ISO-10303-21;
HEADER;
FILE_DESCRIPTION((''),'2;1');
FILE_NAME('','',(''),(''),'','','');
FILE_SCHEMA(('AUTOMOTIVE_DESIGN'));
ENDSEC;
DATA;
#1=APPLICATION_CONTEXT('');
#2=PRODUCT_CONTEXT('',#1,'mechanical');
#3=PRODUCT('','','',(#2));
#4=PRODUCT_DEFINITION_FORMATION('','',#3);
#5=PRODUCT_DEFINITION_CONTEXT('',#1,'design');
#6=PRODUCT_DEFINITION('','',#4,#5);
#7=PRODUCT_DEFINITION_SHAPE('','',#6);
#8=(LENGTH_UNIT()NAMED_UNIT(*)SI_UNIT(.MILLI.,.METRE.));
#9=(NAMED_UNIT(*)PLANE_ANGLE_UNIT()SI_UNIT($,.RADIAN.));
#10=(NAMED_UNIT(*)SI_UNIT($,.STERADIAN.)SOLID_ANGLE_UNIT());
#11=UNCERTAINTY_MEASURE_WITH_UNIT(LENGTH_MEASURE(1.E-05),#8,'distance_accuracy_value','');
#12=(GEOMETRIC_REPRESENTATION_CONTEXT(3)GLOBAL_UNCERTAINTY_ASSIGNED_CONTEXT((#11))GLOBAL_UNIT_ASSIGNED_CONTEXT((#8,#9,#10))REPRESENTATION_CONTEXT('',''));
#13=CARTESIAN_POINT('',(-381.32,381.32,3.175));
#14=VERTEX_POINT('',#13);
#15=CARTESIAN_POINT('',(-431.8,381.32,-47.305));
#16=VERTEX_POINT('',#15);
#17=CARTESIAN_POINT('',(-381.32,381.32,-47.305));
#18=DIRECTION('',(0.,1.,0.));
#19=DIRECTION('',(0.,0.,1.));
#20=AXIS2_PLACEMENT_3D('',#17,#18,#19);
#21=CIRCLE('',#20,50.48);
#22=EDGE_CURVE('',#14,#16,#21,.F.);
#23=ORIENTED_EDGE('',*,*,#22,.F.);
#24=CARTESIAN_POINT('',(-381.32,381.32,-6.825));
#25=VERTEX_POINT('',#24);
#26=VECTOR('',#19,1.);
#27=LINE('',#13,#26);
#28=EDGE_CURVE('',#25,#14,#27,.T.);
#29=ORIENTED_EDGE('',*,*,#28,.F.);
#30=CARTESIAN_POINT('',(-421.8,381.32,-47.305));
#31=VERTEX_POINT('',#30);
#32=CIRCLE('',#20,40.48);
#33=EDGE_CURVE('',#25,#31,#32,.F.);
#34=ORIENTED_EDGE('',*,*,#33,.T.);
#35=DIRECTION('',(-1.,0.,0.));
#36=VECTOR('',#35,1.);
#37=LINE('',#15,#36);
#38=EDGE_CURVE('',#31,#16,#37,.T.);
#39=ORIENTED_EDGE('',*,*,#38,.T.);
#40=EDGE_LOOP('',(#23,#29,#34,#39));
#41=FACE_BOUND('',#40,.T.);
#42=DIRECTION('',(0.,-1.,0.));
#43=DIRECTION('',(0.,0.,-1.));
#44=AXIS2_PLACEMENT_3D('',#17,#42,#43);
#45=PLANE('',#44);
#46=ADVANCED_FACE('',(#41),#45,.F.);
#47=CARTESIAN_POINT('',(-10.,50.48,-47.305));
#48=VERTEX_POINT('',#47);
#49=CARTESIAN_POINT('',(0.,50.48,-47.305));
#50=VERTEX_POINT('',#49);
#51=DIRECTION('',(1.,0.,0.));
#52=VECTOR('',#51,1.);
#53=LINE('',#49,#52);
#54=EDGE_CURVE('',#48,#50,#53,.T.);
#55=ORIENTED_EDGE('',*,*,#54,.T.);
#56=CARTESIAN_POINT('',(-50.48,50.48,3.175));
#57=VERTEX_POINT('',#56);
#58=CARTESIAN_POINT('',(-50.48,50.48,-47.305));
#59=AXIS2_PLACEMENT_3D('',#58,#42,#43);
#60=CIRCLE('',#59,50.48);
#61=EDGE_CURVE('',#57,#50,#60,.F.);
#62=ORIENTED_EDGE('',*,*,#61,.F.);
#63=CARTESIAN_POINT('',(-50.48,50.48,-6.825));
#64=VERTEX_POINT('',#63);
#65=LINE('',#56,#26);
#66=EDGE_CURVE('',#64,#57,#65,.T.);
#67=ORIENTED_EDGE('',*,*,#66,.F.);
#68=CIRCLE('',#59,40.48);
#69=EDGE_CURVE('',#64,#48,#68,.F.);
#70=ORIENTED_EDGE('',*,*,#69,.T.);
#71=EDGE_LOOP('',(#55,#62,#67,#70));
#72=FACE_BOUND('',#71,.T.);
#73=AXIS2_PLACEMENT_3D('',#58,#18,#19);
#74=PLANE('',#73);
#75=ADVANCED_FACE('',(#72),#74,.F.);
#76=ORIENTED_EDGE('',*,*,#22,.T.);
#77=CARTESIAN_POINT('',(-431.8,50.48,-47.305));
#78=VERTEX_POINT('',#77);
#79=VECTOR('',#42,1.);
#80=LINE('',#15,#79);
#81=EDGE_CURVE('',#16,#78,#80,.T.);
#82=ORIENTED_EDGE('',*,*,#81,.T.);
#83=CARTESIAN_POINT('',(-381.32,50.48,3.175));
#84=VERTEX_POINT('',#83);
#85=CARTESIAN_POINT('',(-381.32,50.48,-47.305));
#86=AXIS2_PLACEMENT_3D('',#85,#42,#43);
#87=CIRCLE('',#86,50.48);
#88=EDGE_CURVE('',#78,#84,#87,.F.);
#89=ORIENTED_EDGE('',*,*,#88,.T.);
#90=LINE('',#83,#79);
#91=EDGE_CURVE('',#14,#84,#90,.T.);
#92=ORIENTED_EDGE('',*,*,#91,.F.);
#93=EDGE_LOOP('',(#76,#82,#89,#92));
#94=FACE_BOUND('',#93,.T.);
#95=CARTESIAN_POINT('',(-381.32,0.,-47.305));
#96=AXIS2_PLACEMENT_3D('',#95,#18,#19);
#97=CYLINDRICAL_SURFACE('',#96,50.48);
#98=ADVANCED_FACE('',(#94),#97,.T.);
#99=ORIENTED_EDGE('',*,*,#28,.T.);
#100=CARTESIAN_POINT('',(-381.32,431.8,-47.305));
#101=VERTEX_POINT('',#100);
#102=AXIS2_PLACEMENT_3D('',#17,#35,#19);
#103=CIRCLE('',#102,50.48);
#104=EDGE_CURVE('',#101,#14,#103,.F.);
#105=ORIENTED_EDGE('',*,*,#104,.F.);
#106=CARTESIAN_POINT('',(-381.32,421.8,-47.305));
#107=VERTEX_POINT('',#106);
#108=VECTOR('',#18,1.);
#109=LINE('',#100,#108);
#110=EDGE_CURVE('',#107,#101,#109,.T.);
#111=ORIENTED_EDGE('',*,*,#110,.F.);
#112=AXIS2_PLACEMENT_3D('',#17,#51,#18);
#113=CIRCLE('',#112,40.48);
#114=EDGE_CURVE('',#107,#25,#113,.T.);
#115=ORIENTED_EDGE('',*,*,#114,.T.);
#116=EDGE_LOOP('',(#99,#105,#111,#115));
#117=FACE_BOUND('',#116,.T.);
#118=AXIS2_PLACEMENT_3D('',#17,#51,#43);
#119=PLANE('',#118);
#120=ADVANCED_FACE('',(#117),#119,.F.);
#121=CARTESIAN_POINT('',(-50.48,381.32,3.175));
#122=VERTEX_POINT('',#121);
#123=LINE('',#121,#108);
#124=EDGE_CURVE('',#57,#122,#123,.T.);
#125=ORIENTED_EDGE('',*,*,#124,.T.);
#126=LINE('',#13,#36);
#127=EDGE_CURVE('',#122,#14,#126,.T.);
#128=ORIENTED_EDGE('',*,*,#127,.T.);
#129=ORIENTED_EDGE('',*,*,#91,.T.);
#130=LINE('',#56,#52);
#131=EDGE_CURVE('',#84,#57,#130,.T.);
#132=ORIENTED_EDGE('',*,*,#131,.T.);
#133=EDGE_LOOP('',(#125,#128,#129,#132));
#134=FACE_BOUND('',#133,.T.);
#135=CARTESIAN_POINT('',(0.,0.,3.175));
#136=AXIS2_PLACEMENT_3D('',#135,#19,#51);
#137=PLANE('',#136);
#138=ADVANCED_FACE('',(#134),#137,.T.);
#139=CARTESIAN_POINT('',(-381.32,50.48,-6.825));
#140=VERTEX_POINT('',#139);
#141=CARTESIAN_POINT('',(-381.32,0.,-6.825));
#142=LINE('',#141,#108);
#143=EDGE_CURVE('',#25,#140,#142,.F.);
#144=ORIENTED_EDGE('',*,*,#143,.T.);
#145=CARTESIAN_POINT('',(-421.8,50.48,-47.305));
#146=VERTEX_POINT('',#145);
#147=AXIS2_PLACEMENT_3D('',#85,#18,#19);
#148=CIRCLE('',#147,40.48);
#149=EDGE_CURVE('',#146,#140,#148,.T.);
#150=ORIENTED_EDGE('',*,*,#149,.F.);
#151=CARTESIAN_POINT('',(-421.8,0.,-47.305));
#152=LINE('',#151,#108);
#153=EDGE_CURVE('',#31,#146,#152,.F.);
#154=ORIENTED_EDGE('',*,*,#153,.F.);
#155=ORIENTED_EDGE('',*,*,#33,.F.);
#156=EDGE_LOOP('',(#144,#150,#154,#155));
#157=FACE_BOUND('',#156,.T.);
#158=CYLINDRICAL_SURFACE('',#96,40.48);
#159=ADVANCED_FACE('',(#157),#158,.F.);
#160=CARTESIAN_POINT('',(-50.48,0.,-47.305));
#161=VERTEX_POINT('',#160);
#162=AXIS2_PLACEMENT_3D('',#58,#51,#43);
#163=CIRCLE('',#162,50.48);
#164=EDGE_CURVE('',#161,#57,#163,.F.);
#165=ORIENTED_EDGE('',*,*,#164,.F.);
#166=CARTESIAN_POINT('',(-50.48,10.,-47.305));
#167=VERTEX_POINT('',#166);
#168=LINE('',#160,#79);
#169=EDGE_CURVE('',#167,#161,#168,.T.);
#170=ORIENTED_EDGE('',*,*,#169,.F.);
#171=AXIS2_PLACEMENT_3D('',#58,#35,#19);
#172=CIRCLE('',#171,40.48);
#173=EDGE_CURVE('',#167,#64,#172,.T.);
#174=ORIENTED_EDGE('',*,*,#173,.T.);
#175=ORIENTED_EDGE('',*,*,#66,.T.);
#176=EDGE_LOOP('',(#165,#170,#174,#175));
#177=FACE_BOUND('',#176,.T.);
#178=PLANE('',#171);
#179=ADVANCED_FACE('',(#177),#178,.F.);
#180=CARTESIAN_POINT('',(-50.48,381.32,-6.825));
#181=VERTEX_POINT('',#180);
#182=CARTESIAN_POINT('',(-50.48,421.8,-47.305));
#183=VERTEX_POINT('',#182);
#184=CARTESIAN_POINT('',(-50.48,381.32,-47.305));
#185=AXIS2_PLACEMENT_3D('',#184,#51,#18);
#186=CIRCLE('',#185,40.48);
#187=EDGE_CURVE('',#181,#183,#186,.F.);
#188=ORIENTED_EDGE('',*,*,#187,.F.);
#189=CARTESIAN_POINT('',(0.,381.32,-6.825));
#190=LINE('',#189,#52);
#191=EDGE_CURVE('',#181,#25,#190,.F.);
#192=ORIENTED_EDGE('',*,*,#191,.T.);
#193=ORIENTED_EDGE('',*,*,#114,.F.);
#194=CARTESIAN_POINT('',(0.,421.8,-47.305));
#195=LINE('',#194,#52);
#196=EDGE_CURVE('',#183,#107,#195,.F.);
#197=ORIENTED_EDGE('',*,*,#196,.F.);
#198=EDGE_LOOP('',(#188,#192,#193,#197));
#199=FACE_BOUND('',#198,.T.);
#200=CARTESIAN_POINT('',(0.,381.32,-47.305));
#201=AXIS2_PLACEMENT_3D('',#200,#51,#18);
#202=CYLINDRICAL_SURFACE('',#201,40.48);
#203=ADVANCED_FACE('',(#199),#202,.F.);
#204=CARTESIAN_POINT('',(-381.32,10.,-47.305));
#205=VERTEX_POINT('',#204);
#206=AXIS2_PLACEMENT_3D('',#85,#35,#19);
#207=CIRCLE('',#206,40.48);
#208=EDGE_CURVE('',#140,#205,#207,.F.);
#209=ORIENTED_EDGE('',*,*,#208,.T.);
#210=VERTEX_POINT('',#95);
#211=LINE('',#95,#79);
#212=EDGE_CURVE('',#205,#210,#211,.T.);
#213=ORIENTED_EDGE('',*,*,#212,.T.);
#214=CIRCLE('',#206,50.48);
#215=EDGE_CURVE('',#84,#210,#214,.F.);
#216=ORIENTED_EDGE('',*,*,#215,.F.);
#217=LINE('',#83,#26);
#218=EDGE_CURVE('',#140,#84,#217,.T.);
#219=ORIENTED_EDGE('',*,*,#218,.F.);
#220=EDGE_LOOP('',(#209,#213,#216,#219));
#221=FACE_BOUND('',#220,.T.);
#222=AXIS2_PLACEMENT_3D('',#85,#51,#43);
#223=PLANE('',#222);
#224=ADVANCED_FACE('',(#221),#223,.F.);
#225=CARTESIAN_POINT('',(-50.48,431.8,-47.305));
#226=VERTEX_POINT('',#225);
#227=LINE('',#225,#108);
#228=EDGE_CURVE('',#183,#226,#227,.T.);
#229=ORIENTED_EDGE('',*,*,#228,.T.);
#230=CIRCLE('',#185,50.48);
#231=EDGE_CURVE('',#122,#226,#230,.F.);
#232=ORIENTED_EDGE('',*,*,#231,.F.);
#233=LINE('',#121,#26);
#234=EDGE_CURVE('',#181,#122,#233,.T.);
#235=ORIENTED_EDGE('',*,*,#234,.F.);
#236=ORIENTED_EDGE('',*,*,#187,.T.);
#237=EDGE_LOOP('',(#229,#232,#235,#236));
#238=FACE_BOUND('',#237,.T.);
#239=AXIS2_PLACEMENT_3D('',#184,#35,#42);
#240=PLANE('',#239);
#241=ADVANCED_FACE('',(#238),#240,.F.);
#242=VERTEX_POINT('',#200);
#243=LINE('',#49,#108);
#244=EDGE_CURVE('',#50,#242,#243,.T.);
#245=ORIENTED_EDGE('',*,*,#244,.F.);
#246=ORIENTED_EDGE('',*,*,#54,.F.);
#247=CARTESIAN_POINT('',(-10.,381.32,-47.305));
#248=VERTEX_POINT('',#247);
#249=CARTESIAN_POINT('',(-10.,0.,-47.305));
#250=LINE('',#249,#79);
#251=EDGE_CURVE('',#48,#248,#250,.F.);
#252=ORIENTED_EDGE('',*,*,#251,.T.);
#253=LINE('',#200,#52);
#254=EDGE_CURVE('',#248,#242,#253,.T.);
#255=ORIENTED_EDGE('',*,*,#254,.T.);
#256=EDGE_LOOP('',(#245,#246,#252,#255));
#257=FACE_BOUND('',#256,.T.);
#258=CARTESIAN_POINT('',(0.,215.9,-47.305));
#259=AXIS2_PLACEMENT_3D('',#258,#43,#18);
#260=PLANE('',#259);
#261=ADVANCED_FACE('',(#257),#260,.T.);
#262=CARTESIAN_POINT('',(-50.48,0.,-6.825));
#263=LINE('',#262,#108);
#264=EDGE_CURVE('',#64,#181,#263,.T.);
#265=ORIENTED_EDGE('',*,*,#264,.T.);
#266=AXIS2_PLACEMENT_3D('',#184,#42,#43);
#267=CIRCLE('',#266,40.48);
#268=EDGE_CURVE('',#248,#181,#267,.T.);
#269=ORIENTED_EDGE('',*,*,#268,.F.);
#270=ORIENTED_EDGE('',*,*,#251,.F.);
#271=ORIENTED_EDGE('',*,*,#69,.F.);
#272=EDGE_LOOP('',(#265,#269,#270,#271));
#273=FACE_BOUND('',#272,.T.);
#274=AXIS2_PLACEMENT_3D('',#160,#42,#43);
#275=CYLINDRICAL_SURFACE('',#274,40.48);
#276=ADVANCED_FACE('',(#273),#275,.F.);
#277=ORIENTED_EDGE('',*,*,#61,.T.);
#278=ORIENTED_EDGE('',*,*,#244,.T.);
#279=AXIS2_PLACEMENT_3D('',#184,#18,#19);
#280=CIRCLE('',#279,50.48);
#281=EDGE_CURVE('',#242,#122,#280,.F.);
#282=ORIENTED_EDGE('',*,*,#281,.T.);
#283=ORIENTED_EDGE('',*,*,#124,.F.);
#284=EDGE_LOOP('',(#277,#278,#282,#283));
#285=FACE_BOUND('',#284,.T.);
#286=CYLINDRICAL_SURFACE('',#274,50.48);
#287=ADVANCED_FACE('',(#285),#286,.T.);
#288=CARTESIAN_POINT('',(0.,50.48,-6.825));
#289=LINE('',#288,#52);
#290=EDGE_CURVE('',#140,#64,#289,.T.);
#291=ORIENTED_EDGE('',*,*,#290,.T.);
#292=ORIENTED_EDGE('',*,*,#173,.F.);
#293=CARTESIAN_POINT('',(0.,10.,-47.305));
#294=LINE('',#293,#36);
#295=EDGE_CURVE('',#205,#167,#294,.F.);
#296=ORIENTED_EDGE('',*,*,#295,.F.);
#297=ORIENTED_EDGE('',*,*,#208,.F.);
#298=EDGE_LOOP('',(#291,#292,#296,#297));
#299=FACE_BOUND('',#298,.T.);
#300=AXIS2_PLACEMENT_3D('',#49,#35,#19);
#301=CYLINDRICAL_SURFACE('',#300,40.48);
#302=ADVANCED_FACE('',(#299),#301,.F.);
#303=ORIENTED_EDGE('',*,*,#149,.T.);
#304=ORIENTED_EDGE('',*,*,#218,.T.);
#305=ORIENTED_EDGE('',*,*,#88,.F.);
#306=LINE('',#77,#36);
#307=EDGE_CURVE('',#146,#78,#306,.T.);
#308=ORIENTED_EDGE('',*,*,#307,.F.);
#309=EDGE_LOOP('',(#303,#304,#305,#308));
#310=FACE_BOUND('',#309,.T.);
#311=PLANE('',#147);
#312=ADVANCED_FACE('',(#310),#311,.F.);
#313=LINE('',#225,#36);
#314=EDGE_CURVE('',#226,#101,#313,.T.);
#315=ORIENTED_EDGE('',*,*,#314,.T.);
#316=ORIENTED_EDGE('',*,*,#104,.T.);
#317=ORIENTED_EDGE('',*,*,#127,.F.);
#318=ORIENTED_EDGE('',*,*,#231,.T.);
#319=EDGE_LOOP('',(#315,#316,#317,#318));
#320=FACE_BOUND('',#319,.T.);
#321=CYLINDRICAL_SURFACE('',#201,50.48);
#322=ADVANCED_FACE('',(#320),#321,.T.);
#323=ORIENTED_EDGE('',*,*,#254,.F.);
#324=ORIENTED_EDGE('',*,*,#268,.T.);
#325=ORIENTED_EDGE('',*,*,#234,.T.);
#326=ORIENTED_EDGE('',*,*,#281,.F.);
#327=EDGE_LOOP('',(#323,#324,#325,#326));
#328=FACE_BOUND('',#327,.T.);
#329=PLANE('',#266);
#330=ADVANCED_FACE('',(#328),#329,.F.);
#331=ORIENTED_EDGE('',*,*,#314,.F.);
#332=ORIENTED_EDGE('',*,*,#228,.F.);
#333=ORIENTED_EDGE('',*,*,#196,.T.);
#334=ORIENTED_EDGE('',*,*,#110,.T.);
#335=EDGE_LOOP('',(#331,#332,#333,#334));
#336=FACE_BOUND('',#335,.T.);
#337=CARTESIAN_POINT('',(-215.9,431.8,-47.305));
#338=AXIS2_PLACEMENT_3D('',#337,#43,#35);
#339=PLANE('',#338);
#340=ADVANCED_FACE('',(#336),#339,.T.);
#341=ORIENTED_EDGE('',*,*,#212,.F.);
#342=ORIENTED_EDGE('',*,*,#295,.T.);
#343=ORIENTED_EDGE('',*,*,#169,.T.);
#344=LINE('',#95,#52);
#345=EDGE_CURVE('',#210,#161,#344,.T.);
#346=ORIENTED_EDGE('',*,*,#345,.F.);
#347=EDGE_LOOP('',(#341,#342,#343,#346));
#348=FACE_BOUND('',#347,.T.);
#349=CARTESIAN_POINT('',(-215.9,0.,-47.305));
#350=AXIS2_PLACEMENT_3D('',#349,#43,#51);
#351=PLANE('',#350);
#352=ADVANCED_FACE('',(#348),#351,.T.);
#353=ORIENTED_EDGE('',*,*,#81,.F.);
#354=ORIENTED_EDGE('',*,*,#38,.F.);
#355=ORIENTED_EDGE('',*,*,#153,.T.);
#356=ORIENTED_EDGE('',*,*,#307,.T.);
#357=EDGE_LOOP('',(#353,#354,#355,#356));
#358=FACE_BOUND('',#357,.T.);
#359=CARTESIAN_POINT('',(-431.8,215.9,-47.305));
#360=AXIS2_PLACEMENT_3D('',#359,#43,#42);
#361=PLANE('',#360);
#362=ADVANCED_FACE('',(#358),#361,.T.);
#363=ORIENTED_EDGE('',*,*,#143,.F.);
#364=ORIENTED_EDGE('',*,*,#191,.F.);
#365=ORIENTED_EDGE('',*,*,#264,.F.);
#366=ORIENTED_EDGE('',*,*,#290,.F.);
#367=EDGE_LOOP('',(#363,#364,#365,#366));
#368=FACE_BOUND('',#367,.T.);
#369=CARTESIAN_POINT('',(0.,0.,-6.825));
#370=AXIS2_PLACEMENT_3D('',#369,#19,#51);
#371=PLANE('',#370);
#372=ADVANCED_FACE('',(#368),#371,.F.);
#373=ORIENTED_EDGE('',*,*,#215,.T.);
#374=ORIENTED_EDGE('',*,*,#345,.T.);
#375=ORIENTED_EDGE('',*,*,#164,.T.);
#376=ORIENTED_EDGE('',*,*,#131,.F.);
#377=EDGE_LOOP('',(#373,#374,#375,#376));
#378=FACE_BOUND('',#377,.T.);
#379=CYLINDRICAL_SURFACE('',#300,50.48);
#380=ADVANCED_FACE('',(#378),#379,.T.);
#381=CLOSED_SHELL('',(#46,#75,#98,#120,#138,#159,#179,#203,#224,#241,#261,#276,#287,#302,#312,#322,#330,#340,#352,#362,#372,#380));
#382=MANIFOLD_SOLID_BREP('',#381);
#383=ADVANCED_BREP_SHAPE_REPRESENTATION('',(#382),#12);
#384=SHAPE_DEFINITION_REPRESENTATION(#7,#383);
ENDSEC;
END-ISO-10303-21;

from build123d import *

# Parameters (mm, degrees)
SKETCH1_W                  = 431.8
SKETCH1_H                  = 431.8
BOSS_EXTRUDE1_DEPTH        = 3.175
CONVERT_SOLID2_START       = -431.8
CONVERT_SOLID2_DEPTH       = 431.8
CONVERT_SOLID2_2_DEPTH     = 50.480000066
CONVERT_SOLID2_START_2     = -50.480000066
CONVERT_SOLID2_3_DEPTH     = 50.480000066
CONVERT_SOLID2_START_3     = -381.319999934
CONVERT_SOLID2_4_DEPTH     = 330.839999868
CONVERT_SOLID2_START_4     = -387.436868
CONVERT_SOLID2_5_OUTLINE_W = 330.839999868
CONVERT_SOLID2_5_OUTLINE_H = 6.825
CONVERT_SOLID2_5_DEPTH     = 345.44
CONVERT_SOLID2_START_5     = 50.480000066
CONVERT_SOLID2_6_DEPTH     = 330.839999868


with BuildPart() as part:
    # Sketch1 → Boss-Extrude1 (new body)
    with BuildSketch(Plane.XY):
        with Locations((-215.9, 215.9)):
            Rectangle(SKETCH1_W, SKETCH1_H)
    extrude(amount=BOSS_EXTRUDE1_DEPTH)

    # Convert-Solid2: read off the stored shape, not the designer's step
    # Convert-Solid2 outline → Convert-Solid2 (cut)
    with BuildSketch(Plane.YZ.offset(CONVERT_SOLID2_START)):
        with BuildLine():
            ThreePointArc((32.859915633, 0), (41.528072893, 2.37490942), (50.480000066, 3.175))
            Line((50.480000066, 3.175), (0, 3.175))
            Line((0, 3.175), (0, 0))
            Line((0, 0), (32.859915633, 0))
        make_face()
        with BuildLine():
            Line((431.8, 3.175), (381.319999934, 3.175))
            ThreePointArc((381.319999934, 3.175), (390.271927107, 2.37490942), (398.940084367, 0))
            Line((398.940084367, 0), (431.8, 0))
            Line((431.8, 0), (431.8, 3.175))
        make_face()
    extrude(amount=CONVERT_SOLID2_DEPTH, mode=Mode.SUBTRACT)

    # Convert-Solid2 2 outline → Convert-Solid2 2 (cut)
    with BuildSketch(Plane.YZ.offset(CONVERT_SOLID2_START)):
        with BuildLine():
            Line((32.859915633, 0), (398.940084367, 0))
            ThreePointArc((398.940084367, 0), (390.271927107, 2.37490942), (381.319999934, 3.175))
            Line((381.319999934, 3.175), (50.480000066, 3.175))
            ThreePointArc((50.480000066, 3.175), (41.528072893, 2.37490942), (32.859915633, 0))
        make_face()
    extrude(amount=CONVERT_SOLID2_2_DEPTH, mode=Mode.SUBTRACT)

    # Convert-Solid2 3 outline → Convert-Solid2 3 (cut)
    with BuildSketch(Plane.YZ.offset(CONVERT_SOLID2_START_2)):
        with BuildLine():
            Line((32.859915633, 0), (398.940084367, 0))
            ThreePointArc((398.940084367, 0), (390.271927107, 2.37490942), (381.319999934, 3.175))
            Line((381.319999934, 3.175), (50.480000066, 3.175))
            ThreePointArc((50.480000066, 3.175), (41.528072893, 2.37490942), (32.859915633, 0))
        make_face()
    extrude(amount=CONVERT_SOLID2_3_DEPTH, mode=Mode.SUBTRACT)

    # Convert-Solid2 4 outline → Convert-Solid2 4 (add)
    with BuildSketch(Plane.YZ.offset(CONVERT_SOLID2_START_3)):
        with BuildLine():
            ThreePointArc((10, -47.305000066), (21.856317517, -18.681317517), (50.480000066, -6.825))
            Line((50.480000066, -6.825), (381.319999934, -6.825))
            ThreePointArc((381.319999934, -6.825), (409.943682483, -18.681317517), (421.8, -47.305000066))
            Line((421.8, -47.305000066), (431.8, -47.305000066))
            ThreePointArc((431.8, -47.305000066), (422.778969229, -18.505967588), (398.940084367, 0))
            Line((398.940084367, 0), (32.859915633, 0))
            ThreePointArc((32.859915633, 0), (9.021030771, -18.505967588), (0, -47.305000066))
            Line((0, -47.305000066), (10, -47.305000066))
        make_face()
    extrude(amount=CONVERT_SOLID2_4_DEPTH)

    # Convert-Solid2 5 outline → Convert-Solid2 5 (add)
    with BuildSketch(Plane.YZ.offset(CONVERT_SOLID2_START_4)):
        with Locations((215.9, -3.4125)):
            Rectangle(CONVERT_SOLID2_5_OUTLINE_W, CONVERT_SOLID2_5_OUTLINE_H)
    extrude(amount=CONVERT_SOLID2_5_DEPTH)

    # Convert-Solid2 6 outline → Convert-Solid2 6 (add)
    with BuildSketch(Plane(origin=(0, 0, 0), x_dir=(1, 0, 0), z_dir=(0, 1, 0)).offset(CONVERT_SOLID2_START_5)):
        with BuildLine():
            ThreePointArc((-50.480000066, -3.175), (-14.785249705, 11.610249705), (0, 47.305000066))
            Line((0, 47.305000066), (-10, 47.305000066))
            ThreePointArc((-10, 47.305000066), (-21.856317517, 18.681317517), (-50.480000066, 6.825))
            Line((-50.480000066, 6.825), (-50.480000066, 0))
            Line((-50.480000066, 0), (-50.480000066, -3.175))
        make_face()
        with BuildLine():
            ThreePointArc((-381.319999934, 6.825), (-409.943682483, 18.681317517), (-421.8, 47.305000066))
            Line((-421.8, 47.305000066), (-431.8, 47.305000066))
            ThreePointArc((-431.8, 47.305000066), (-417.014750295, 11.610249705), (-381.319999934, -3.175))
            Line((-381.319999934, -3.175), (-381.319999934, 0))
            Line((-381.319999934, 0), (-381.319999934, 6.825))
        make_face()
    extrude(amount=CONVERT_SOLID2_6_DEPTH)


solid = part.part
